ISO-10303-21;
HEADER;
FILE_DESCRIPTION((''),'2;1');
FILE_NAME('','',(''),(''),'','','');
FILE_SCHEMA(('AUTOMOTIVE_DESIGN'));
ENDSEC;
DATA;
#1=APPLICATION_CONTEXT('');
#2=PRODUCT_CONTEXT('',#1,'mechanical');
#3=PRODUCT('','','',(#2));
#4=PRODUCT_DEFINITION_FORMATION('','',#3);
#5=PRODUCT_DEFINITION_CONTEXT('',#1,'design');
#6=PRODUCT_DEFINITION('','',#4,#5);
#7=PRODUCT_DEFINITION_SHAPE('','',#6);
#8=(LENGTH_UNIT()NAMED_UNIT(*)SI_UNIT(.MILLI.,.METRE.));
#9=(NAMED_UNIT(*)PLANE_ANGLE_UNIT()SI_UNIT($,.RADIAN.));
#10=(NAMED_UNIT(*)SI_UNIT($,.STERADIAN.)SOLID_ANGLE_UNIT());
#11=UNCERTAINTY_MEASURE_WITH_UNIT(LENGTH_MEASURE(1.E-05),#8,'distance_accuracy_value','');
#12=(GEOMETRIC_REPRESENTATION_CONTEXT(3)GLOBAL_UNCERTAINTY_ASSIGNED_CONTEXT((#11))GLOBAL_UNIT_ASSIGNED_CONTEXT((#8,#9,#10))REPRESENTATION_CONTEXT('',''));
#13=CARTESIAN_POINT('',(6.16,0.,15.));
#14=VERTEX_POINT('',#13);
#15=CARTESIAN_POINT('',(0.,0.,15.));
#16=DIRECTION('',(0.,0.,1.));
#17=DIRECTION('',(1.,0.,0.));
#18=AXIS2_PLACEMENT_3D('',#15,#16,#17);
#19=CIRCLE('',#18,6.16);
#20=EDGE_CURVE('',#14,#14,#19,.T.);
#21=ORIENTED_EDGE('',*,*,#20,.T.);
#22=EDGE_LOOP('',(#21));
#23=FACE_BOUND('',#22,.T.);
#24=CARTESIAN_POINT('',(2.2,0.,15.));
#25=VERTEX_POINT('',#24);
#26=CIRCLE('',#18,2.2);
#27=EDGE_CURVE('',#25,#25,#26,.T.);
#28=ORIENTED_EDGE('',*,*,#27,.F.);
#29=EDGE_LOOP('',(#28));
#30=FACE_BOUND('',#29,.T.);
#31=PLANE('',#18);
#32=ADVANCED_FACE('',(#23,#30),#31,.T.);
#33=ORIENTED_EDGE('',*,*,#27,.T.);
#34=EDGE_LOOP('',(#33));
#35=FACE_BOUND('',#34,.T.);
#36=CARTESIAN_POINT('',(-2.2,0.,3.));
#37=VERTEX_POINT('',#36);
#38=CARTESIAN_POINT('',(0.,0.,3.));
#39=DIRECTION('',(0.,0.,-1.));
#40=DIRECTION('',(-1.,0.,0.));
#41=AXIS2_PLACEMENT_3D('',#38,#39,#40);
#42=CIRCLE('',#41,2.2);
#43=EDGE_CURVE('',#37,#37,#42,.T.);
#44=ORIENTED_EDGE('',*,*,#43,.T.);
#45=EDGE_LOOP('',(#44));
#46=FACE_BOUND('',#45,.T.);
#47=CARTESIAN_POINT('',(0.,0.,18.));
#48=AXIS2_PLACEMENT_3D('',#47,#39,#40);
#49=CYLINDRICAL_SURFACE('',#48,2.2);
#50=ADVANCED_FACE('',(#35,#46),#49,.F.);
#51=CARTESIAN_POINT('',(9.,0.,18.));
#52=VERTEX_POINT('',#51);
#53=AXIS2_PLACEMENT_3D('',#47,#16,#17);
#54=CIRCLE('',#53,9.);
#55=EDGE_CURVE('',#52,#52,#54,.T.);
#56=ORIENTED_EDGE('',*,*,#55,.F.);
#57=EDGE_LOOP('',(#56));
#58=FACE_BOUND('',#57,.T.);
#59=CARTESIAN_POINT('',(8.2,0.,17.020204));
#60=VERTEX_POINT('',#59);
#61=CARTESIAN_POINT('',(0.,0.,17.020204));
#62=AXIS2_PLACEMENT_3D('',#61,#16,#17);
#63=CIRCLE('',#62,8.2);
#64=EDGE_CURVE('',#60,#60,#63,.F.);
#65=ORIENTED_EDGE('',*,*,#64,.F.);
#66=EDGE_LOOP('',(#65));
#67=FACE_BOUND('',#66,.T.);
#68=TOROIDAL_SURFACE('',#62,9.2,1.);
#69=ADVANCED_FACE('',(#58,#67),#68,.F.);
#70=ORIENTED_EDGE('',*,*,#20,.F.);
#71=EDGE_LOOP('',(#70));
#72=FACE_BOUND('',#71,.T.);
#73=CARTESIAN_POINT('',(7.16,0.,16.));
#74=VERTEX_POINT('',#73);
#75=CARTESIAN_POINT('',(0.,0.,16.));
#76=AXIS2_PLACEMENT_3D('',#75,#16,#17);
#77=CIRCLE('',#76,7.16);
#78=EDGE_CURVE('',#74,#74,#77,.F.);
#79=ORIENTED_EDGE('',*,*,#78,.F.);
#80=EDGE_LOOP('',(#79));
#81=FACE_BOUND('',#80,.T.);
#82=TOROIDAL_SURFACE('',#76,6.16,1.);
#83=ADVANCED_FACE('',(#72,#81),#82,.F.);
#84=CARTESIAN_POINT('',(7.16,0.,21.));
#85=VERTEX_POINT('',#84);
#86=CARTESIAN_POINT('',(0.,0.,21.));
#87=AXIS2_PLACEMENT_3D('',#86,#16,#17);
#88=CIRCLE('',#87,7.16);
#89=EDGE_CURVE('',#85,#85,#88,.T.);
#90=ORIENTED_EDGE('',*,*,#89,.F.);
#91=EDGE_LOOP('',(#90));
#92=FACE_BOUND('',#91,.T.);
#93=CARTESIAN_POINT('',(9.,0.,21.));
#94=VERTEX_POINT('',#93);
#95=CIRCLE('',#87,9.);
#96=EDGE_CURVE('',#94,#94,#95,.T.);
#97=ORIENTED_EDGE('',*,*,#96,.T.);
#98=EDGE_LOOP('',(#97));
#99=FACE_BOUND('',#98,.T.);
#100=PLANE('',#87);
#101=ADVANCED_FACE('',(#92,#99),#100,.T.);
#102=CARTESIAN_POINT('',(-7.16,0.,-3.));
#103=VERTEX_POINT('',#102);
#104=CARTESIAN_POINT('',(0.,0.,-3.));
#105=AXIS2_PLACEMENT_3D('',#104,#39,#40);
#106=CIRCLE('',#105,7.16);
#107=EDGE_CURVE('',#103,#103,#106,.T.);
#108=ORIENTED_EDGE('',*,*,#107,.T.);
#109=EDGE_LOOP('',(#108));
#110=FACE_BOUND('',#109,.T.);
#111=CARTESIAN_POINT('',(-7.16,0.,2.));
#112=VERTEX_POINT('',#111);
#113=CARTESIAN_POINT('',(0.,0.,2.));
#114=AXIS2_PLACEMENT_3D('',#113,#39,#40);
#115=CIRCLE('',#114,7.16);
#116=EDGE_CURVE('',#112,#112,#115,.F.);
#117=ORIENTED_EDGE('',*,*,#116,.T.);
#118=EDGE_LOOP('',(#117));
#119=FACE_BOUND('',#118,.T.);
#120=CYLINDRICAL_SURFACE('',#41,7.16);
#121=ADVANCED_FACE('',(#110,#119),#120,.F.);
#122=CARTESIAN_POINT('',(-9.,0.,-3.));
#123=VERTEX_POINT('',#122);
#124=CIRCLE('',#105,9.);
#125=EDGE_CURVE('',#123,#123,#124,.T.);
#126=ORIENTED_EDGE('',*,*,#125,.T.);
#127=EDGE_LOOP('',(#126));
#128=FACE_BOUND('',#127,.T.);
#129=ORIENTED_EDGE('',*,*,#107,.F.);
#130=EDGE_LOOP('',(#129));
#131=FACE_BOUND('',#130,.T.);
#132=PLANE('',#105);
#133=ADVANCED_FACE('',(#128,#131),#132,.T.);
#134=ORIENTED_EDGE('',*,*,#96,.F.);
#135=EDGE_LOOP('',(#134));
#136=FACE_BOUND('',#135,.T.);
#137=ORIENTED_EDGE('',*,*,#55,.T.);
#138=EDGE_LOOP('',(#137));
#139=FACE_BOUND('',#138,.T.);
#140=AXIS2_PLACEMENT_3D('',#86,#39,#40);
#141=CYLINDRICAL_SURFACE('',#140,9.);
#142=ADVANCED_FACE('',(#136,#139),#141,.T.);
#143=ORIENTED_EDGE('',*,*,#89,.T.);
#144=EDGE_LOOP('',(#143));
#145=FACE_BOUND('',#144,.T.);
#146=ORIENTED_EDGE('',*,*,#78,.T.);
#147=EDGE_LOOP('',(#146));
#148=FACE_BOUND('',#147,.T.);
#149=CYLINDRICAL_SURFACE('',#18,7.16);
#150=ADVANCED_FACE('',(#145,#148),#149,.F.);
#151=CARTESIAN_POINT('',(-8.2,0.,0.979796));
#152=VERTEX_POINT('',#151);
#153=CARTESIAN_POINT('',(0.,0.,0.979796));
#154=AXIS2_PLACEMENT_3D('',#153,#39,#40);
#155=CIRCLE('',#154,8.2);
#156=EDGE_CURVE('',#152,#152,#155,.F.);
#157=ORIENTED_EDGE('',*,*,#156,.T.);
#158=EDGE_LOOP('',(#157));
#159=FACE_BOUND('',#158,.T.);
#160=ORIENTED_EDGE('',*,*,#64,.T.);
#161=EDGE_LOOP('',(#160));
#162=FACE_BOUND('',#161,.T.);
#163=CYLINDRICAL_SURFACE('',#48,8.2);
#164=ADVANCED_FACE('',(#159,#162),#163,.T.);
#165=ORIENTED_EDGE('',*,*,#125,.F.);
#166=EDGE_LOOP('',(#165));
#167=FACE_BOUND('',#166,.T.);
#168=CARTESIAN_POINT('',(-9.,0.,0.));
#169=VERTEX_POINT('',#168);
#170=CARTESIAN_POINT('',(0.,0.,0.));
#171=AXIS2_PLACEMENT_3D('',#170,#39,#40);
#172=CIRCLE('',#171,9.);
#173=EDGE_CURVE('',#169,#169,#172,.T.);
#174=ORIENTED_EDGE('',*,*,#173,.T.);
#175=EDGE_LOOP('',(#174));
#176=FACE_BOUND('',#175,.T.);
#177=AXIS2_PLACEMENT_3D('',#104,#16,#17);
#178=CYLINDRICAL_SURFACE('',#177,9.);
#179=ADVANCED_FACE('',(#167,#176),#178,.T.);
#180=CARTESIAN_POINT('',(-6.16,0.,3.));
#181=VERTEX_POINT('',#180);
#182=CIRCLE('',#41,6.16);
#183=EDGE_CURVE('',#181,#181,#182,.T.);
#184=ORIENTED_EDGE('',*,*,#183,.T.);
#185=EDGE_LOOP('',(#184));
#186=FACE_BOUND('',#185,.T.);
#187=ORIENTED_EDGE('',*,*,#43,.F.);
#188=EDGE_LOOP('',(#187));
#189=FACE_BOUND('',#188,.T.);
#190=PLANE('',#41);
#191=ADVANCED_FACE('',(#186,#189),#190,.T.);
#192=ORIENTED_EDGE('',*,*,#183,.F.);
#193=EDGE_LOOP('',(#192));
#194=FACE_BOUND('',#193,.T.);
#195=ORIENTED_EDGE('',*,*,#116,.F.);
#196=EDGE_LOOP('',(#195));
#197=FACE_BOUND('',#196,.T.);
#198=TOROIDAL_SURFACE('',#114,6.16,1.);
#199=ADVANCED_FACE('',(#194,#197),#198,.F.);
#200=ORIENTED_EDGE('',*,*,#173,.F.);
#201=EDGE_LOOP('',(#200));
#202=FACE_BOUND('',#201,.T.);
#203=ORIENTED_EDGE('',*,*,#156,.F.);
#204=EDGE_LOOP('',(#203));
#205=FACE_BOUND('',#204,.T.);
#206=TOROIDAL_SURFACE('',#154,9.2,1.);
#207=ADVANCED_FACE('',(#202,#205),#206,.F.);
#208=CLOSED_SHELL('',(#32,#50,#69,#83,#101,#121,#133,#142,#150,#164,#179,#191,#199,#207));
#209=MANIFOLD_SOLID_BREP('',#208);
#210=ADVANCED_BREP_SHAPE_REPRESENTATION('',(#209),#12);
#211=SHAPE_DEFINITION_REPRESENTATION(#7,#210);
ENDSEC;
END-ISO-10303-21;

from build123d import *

# Parameters (mm, degrees)
SZKIC1_R                    = 8.2
SZKIC1_R_2                  = 2.2
DODANIE_WYCI_GNI_CIE6_DEPTH = 18
SZKIC6_R                    = 9
SZKIC6_R_2                  = 2.2
DODANIE_WYCI_GNI_CIE7_DEPTH = 3
DODANIE_WYCI_GNI_CIE8_START = 3
SZKIC7_R                    = 9
SZKIC7_R_2                  = 2.2
DODANIE_WYCI_GNI_CIE8_DEPTH = 3
SZKIC8_R                    = 7.16
WYTNIJ_WYCI_GNI_CIE2_DEPTH  = 6
WYTNIJ_WYCI_GNI_CIE3_START  = -6
SZKIC9_R                    = 7.16
SZKIC9_R_2                  = 2.2
WYTNIJ_WYCI_GNI_CIE3_DEPTH  = 6
ZAOKR_GLENIE2_R             = 1
ZAOKR_GLENIE3_R             = 1
ZAOKR_GLENIE4_R             = 1


with BuildPart() as part:
    # Szkic1 → Dodanie-wyciągnięcie6 (new body)
    with BuildSketch(Plane.XY):
        Circle(SZKIC1_R)
        Circle(SZKIC1_R_2, mode=Mode.SUBTRACT)
    extrude(amount=DODANIE_WYCI_GNI_CIE6_DEPTH)

    # Szkic6 → Dodanie-wyciągnięcie7 (add)
    with BuildSketch(Plane.XY.offset(18)):
        Circle(SZKIC6_R)
        Circle(SZKIC6_R_2, mode=Mode.SUBTRACT)
    extrude(amount=DODANIE_WYCI_GNI_CIE7_DEPTH)

    # Szkic7 → Dodanie-wyciągnięcie8 (add)
    with BuildSketch(Plane(origin=(0, 0, 0), x_dir=(-1, 0, 0), z_dir=(0, 0, -1)).offset(DODANIE_WYCI_GNI_CIE8_START)):
        with Locations(Location((0, 0, 0), (0, 0, 180))):
            Circle(SZKIC7_R)
        Circle(SZKIC7_R_2, mode=Mode.SUBTRACT)
    extrude(amount=-DODANIE_WYCI_GNI_CIE8_DEPTH)

    # Szkic8 → Wytnij-wyciągnięcie2 (cut)
    with BuildSketch(Plane(origin=(0, 0, -3), x_dir=(-1, 0, 0), z_dir=(0, 0, -1))):
        Circle(SZKIC8_R)
    extrude(amount=-WYTNIJ_WYCI_GNI_CIE2_DEPTH, mode=Mode.SUBTRACT)

    # Szkic9 → Wytnij-wyciągnięcie3 (cut)
    with BuildSketch(Plane.XY.offset(21).offset(WYTNIJ_WYCI_GNI_CIE3_START)):
        with Locations(Location((0, 0, 0), (0, 0, 180))):
            Circle(SZKIC9_R)
        with Locations(Location((0, 0, 0), (0, 0, 180))):
            Circle(SZKIC9_R_2, mode=Mode.SUBTRACT)
    extrude(amount=WYTNIJ_WYCI_GNI_CIE3_DEPTH, mode=Mode.SUBTRACT)

    # Zaokrąglenie2
    # the kernel refuses this fillet: 1 mm, written as the material it adds along each edge
    with BuildSketch(Plane(origin=(0, 0, 0), x_dir=(1, 0, 0), z_dir=(0, -1, 0))) as zaokr_glenie2_piece_1:
        with BuildLine():
            CenterArc((9.2, 0.979795897), ZAOKR_GLENIE2_R, 180, 78.463040967)
            Line((9, 0), (8.996, -0.019595918))
            ThreePointArc((8.996, -0.019595918), (8.6, -0.02), (8.2, -0.02))
            Line((8.2, -0.02), (8.18, 0))
            Line((8.18, 0), (8.18, 0.979795897))
            Line((8.18, 0.979795897), (8.2, 0.979795897))
        make_face()
    revolve(axis=Axis((0, 0, 0), (0, 0, 1)))
    with BuildSketch(Plane(origin=(0, 0, 18), x_dir=(1, 0, 0), z_dir=(0, -1, 0))) as zaokr_glenie2_piece_2:
        with BuildLine():
            CenterArc((9.2, -0.979795897), ZAOKR_GLENIE2_R, 101.536959033, 78.463040967)
            Line((9, 0), (8.996, 0.019595918))
            ThreePointArc((8.996, 0.019595918), (8.6, 0.02), (8.2, 0.02))
            Line((8.2, 0.02), (8.18, 0))
            Line((8.18, 0), (8.18, -0.979795897))
            Line((8.18, -0.979795897), (8.2, -0.979795897))
        make_face()
    revolve(axis=Axis((0, 0, 18), (0, 0, 1)))

    # Zaokrąglenie3
    zaokr_glenie3_edges = [part.edges().sort_by_distance(p)[0] for p in [
        (7.16, 0, 3),
    ]]
    fillet(zaokr_glenie3_edges, radius=ZAOKR_GLENIE3_R)

    # Zaokrąglenie4
    zaokr_glenie4_edges = [part.edges().sort_by_distance(p)[0] for p in [
        (7.16, 0, 15),
    ]]
    fillet(zaokr_glenie4_edges, radius=ZAOKR_GLENIE4_R)


solid = part.part
